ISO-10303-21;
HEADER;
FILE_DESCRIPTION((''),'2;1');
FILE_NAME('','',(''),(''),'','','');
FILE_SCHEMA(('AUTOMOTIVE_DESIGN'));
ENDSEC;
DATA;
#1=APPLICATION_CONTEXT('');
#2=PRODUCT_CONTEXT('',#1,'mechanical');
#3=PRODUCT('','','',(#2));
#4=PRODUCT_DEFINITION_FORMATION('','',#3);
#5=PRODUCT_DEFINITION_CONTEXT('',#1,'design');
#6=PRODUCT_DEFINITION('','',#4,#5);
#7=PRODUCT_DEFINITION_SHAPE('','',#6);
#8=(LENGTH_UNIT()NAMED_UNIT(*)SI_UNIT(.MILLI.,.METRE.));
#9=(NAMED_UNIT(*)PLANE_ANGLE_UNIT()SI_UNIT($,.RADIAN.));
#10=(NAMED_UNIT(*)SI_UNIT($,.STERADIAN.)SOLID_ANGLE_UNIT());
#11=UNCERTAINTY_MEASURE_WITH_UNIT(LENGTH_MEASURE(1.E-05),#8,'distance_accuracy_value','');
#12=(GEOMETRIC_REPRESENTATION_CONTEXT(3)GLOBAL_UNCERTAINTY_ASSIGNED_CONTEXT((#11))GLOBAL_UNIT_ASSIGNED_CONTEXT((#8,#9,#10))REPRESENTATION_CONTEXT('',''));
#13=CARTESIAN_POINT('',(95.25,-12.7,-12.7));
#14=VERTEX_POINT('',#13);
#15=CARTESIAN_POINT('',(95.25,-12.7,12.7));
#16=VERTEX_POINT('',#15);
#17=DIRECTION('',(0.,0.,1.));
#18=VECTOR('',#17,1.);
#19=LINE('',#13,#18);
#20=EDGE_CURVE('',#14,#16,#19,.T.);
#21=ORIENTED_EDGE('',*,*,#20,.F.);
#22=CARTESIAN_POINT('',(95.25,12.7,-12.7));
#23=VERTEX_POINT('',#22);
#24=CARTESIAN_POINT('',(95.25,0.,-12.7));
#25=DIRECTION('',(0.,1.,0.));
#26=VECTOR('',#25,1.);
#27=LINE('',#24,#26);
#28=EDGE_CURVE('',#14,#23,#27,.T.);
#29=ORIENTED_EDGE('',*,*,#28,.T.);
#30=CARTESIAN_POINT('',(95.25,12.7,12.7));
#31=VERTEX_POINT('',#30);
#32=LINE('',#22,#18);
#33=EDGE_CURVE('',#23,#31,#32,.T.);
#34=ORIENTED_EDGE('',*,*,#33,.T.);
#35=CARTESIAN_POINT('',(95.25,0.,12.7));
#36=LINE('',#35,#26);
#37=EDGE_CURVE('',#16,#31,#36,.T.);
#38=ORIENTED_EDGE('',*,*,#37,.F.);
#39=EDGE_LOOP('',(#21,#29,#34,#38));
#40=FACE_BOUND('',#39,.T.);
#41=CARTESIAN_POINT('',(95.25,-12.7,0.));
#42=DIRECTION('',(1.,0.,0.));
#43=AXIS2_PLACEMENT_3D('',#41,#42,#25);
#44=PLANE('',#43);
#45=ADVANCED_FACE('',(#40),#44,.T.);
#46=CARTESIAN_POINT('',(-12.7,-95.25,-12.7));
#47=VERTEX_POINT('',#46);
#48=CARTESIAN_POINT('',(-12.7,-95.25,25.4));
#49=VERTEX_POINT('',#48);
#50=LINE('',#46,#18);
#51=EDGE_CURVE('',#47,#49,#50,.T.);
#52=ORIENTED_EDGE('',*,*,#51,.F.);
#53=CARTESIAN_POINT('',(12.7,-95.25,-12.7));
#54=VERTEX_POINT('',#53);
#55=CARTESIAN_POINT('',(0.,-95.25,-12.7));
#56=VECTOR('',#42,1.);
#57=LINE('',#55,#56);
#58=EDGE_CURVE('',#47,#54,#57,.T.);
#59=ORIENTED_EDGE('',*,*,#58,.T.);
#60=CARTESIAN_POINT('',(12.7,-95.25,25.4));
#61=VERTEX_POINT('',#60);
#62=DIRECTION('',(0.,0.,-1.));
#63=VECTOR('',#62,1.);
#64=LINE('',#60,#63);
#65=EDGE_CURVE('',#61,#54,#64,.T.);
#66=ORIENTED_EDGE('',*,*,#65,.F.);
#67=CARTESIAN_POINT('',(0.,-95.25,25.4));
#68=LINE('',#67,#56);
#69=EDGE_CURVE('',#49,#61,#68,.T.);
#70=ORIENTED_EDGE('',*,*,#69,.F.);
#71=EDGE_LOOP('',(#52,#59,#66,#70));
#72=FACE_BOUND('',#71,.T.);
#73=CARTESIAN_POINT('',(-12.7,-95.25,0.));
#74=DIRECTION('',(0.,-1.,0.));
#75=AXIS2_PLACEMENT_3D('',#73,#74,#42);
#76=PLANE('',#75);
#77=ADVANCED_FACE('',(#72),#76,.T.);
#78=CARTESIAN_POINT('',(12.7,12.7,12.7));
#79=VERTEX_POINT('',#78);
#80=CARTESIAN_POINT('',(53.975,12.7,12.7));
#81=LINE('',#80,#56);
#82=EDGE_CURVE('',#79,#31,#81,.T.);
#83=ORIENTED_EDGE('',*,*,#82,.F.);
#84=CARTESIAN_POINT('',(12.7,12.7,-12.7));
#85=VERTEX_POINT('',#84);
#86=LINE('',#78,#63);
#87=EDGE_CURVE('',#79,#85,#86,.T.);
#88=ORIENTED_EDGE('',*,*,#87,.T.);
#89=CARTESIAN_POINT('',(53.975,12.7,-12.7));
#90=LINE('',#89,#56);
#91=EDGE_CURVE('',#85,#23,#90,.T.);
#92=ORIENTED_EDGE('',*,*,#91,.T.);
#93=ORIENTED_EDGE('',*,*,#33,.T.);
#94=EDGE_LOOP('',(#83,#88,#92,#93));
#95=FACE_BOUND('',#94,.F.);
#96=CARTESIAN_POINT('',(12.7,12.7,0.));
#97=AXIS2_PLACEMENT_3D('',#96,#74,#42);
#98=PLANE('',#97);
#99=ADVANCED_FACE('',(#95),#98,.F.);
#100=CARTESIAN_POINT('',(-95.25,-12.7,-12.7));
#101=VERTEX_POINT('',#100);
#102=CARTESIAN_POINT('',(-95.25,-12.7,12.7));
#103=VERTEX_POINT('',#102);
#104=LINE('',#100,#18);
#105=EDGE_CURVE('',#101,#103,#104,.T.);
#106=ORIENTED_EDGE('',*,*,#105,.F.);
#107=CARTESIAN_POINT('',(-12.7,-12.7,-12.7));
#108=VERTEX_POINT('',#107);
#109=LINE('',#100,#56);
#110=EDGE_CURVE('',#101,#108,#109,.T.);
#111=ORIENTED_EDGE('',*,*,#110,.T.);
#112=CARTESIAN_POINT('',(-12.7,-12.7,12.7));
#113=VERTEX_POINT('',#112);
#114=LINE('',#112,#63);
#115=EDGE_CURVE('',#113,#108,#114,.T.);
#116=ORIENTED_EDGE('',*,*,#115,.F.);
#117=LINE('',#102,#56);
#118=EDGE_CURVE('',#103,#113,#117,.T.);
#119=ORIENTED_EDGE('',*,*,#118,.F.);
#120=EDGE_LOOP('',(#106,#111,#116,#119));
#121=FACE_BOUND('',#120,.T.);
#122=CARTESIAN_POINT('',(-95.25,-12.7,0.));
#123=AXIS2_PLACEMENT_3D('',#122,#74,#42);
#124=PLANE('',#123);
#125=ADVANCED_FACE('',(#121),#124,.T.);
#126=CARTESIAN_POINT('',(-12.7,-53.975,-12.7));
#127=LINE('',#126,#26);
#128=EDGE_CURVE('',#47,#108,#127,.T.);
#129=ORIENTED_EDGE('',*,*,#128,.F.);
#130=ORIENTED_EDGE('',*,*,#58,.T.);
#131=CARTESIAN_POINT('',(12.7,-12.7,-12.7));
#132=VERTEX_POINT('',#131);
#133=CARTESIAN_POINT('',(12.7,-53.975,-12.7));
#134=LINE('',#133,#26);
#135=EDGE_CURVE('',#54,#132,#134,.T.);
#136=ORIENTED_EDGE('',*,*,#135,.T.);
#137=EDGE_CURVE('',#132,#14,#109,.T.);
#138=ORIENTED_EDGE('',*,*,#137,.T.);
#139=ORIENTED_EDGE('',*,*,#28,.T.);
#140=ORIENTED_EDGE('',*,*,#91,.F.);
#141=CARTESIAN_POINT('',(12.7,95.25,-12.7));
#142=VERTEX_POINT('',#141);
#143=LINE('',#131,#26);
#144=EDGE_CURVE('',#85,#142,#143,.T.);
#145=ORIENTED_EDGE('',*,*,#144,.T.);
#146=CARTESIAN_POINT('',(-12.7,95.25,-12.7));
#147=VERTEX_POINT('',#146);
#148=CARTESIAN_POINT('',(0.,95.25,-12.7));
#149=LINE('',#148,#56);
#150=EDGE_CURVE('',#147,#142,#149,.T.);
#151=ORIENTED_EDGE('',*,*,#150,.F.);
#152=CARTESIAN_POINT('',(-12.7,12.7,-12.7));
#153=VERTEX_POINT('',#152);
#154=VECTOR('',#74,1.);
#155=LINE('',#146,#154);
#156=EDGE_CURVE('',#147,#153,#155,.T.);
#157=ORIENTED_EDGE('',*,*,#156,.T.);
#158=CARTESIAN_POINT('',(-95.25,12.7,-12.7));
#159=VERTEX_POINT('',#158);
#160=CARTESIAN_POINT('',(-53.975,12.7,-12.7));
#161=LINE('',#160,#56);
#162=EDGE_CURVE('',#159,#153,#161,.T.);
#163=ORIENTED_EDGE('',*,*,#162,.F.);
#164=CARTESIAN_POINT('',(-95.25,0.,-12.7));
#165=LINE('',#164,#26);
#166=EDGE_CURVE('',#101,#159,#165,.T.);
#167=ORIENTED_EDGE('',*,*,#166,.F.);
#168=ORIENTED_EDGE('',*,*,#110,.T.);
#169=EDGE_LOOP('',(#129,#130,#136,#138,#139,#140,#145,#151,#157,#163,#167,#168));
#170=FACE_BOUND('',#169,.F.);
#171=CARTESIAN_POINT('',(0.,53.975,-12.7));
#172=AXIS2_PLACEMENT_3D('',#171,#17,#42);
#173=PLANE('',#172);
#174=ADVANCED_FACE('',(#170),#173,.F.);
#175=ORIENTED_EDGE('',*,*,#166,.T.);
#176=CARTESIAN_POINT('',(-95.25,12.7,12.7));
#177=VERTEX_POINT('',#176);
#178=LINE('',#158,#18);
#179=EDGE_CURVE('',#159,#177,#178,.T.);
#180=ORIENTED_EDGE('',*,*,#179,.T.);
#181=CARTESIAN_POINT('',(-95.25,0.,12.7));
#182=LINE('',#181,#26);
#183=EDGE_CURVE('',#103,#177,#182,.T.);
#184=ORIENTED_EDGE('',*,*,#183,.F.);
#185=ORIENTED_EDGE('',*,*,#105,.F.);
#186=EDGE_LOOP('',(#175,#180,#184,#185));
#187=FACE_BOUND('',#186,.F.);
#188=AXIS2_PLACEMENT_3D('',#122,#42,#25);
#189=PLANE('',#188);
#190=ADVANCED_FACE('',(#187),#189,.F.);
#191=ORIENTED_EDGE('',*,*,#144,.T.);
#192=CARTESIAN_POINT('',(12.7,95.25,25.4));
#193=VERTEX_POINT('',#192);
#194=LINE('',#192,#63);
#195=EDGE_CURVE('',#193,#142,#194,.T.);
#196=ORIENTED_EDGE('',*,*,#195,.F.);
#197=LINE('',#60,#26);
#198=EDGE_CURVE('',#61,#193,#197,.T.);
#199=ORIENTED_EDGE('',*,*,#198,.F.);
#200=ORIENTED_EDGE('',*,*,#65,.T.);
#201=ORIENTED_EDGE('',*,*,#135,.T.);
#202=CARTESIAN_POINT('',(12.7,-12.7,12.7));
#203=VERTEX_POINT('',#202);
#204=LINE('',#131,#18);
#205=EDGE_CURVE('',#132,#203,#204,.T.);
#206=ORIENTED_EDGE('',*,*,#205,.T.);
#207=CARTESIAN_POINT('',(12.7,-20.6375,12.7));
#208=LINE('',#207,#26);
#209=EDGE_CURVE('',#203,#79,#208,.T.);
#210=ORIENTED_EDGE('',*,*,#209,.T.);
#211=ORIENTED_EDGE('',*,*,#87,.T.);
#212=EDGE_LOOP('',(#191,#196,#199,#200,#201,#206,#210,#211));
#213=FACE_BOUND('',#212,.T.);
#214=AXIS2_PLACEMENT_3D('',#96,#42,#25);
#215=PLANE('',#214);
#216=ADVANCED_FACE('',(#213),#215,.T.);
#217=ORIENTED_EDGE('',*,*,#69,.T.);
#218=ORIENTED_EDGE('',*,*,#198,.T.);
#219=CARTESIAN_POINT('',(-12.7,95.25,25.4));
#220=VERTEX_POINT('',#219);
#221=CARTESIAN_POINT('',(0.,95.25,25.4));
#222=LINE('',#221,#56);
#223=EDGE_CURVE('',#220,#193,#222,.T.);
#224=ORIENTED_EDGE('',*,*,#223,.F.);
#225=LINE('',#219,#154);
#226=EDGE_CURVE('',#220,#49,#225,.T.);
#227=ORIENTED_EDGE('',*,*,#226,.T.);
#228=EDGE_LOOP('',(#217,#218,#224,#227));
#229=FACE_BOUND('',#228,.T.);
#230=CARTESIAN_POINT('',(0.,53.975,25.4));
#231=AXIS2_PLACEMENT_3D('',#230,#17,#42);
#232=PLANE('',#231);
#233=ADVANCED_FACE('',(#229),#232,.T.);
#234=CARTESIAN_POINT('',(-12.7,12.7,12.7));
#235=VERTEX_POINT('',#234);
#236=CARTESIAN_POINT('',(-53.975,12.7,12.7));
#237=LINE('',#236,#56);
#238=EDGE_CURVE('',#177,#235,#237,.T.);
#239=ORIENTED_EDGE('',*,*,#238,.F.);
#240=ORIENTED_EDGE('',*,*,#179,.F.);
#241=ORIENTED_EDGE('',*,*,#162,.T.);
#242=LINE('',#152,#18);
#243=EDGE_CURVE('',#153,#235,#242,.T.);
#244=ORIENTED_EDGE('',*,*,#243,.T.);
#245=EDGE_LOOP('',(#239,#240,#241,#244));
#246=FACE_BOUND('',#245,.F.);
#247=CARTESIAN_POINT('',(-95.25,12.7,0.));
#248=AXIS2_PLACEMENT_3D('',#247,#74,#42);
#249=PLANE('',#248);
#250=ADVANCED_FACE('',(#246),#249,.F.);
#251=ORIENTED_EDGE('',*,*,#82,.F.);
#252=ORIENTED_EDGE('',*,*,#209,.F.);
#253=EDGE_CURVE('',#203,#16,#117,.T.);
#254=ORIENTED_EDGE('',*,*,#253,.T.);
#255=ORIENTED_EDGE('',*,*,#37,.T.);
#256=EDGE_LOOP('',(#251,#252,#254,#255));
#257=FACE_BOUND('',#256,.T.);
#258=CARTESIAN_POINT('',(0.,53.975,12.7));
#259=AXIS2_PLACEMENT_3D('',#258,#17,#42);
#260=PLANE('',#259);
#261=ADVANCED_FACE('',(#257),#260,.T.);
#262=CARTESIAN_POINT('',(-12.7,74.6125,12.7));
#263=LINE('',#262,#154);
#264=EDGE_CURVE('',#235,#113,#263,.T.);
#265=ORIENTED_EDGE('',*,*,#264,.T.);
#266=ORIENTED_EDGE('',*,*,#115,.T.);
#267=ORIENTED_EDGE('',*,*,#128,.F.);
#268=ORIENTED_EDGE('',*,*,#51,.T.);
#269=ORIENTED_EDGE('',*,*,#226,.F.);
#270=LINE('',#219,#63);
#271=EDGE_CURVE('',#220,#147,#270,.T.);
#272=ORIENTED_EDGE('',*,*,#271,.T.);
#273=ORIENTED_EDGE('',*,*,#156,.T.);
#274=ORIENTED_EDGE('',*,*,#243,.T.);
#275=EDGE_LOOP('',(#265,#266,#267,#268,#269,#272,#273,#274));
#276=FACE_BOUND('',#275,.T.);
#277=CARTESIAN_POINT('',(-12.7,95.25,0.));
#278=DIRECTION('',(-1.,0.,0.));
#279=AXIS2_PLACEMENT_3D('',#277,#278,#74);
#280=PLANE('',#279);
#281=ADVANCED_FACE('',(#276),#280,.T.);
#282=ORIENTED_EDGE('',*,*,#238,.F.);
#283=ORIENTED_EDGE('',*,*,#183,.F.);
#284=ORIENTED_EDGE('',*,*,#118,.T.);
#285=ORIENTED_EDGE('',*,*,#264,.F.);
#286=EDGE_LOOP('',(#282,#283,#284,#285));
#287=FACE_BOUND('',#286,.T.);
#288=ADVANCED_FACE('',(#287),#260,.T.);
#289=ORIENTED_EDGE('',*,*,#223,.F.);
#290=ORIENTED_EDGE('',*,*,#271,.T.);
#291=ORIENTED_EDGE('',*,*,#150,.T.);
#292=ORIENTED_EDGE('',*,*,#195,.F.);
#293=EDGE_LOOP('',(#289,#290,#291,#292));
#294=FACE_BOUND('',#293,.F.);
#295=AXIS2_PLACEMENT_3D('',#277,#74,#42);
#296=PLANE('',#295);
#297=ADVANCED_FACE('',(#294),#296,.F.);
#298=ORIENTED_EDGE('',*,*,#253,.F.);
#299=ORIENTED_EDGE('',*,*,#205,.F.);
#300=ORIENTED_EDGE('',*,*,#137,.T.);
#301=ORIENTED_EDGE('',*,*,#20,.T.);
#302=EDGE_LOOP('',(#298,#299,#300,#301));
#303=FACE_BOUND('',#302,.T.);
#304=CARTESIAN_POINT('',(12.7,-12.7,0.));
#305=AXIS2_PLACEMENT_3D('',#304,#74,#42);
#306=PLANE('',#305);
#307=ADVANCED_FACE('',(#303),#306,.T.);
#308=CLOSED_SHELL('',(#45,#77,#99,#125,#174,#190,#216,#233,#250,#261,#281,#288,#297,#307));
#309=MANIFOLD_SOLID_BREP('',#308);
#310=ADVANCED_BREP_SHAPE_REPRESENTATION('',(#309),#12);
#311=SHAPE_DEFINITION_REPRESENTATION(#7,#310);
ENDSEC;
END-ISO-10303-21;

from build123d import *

# Parameters (mm, degrees)
F0_W     = 25.4
F0_H     = 82.55
F0_H_2   = 25.4
F1_DEPTH = 25.4
F0_W_2   = 82.55
F2_DEPTH = 12.7


with BuildPart() as f1:
    # F0 (on Top) → F1 (new body)
    with BuildSketch(Plane.XY):
        with Locations((0, 53.975)):
            Rectangle(F0_W, F0_H)
        Rectangle(F0_W, F0_H_2)
        with Locations((0, -53.975)):
            Rectangle(F0_W, F0_H)
    extrude(amount=F1_DEPTH)

    # F0 (on Top) → F2 (join, symmetric)
    with BuildSketch(Plane.XY):
        with Locations((0, 53.975)):
            Rectangle(F0_W, F0_H)
        Rectangle(F0_W, F0_H_2)
        with Locations((-53.975, 0)):
            Rectangle(F0_W_2, F0_H_2)
        with Locations((53.975, 0)):
            Rectangle(F0_W_2, F0_H_2)
        with Locations((0, -53.975)):
            Rectangle(F0_W, F0_H)
    extrude(amount=F2_DEPTH, both=True)


solid = f1.part
